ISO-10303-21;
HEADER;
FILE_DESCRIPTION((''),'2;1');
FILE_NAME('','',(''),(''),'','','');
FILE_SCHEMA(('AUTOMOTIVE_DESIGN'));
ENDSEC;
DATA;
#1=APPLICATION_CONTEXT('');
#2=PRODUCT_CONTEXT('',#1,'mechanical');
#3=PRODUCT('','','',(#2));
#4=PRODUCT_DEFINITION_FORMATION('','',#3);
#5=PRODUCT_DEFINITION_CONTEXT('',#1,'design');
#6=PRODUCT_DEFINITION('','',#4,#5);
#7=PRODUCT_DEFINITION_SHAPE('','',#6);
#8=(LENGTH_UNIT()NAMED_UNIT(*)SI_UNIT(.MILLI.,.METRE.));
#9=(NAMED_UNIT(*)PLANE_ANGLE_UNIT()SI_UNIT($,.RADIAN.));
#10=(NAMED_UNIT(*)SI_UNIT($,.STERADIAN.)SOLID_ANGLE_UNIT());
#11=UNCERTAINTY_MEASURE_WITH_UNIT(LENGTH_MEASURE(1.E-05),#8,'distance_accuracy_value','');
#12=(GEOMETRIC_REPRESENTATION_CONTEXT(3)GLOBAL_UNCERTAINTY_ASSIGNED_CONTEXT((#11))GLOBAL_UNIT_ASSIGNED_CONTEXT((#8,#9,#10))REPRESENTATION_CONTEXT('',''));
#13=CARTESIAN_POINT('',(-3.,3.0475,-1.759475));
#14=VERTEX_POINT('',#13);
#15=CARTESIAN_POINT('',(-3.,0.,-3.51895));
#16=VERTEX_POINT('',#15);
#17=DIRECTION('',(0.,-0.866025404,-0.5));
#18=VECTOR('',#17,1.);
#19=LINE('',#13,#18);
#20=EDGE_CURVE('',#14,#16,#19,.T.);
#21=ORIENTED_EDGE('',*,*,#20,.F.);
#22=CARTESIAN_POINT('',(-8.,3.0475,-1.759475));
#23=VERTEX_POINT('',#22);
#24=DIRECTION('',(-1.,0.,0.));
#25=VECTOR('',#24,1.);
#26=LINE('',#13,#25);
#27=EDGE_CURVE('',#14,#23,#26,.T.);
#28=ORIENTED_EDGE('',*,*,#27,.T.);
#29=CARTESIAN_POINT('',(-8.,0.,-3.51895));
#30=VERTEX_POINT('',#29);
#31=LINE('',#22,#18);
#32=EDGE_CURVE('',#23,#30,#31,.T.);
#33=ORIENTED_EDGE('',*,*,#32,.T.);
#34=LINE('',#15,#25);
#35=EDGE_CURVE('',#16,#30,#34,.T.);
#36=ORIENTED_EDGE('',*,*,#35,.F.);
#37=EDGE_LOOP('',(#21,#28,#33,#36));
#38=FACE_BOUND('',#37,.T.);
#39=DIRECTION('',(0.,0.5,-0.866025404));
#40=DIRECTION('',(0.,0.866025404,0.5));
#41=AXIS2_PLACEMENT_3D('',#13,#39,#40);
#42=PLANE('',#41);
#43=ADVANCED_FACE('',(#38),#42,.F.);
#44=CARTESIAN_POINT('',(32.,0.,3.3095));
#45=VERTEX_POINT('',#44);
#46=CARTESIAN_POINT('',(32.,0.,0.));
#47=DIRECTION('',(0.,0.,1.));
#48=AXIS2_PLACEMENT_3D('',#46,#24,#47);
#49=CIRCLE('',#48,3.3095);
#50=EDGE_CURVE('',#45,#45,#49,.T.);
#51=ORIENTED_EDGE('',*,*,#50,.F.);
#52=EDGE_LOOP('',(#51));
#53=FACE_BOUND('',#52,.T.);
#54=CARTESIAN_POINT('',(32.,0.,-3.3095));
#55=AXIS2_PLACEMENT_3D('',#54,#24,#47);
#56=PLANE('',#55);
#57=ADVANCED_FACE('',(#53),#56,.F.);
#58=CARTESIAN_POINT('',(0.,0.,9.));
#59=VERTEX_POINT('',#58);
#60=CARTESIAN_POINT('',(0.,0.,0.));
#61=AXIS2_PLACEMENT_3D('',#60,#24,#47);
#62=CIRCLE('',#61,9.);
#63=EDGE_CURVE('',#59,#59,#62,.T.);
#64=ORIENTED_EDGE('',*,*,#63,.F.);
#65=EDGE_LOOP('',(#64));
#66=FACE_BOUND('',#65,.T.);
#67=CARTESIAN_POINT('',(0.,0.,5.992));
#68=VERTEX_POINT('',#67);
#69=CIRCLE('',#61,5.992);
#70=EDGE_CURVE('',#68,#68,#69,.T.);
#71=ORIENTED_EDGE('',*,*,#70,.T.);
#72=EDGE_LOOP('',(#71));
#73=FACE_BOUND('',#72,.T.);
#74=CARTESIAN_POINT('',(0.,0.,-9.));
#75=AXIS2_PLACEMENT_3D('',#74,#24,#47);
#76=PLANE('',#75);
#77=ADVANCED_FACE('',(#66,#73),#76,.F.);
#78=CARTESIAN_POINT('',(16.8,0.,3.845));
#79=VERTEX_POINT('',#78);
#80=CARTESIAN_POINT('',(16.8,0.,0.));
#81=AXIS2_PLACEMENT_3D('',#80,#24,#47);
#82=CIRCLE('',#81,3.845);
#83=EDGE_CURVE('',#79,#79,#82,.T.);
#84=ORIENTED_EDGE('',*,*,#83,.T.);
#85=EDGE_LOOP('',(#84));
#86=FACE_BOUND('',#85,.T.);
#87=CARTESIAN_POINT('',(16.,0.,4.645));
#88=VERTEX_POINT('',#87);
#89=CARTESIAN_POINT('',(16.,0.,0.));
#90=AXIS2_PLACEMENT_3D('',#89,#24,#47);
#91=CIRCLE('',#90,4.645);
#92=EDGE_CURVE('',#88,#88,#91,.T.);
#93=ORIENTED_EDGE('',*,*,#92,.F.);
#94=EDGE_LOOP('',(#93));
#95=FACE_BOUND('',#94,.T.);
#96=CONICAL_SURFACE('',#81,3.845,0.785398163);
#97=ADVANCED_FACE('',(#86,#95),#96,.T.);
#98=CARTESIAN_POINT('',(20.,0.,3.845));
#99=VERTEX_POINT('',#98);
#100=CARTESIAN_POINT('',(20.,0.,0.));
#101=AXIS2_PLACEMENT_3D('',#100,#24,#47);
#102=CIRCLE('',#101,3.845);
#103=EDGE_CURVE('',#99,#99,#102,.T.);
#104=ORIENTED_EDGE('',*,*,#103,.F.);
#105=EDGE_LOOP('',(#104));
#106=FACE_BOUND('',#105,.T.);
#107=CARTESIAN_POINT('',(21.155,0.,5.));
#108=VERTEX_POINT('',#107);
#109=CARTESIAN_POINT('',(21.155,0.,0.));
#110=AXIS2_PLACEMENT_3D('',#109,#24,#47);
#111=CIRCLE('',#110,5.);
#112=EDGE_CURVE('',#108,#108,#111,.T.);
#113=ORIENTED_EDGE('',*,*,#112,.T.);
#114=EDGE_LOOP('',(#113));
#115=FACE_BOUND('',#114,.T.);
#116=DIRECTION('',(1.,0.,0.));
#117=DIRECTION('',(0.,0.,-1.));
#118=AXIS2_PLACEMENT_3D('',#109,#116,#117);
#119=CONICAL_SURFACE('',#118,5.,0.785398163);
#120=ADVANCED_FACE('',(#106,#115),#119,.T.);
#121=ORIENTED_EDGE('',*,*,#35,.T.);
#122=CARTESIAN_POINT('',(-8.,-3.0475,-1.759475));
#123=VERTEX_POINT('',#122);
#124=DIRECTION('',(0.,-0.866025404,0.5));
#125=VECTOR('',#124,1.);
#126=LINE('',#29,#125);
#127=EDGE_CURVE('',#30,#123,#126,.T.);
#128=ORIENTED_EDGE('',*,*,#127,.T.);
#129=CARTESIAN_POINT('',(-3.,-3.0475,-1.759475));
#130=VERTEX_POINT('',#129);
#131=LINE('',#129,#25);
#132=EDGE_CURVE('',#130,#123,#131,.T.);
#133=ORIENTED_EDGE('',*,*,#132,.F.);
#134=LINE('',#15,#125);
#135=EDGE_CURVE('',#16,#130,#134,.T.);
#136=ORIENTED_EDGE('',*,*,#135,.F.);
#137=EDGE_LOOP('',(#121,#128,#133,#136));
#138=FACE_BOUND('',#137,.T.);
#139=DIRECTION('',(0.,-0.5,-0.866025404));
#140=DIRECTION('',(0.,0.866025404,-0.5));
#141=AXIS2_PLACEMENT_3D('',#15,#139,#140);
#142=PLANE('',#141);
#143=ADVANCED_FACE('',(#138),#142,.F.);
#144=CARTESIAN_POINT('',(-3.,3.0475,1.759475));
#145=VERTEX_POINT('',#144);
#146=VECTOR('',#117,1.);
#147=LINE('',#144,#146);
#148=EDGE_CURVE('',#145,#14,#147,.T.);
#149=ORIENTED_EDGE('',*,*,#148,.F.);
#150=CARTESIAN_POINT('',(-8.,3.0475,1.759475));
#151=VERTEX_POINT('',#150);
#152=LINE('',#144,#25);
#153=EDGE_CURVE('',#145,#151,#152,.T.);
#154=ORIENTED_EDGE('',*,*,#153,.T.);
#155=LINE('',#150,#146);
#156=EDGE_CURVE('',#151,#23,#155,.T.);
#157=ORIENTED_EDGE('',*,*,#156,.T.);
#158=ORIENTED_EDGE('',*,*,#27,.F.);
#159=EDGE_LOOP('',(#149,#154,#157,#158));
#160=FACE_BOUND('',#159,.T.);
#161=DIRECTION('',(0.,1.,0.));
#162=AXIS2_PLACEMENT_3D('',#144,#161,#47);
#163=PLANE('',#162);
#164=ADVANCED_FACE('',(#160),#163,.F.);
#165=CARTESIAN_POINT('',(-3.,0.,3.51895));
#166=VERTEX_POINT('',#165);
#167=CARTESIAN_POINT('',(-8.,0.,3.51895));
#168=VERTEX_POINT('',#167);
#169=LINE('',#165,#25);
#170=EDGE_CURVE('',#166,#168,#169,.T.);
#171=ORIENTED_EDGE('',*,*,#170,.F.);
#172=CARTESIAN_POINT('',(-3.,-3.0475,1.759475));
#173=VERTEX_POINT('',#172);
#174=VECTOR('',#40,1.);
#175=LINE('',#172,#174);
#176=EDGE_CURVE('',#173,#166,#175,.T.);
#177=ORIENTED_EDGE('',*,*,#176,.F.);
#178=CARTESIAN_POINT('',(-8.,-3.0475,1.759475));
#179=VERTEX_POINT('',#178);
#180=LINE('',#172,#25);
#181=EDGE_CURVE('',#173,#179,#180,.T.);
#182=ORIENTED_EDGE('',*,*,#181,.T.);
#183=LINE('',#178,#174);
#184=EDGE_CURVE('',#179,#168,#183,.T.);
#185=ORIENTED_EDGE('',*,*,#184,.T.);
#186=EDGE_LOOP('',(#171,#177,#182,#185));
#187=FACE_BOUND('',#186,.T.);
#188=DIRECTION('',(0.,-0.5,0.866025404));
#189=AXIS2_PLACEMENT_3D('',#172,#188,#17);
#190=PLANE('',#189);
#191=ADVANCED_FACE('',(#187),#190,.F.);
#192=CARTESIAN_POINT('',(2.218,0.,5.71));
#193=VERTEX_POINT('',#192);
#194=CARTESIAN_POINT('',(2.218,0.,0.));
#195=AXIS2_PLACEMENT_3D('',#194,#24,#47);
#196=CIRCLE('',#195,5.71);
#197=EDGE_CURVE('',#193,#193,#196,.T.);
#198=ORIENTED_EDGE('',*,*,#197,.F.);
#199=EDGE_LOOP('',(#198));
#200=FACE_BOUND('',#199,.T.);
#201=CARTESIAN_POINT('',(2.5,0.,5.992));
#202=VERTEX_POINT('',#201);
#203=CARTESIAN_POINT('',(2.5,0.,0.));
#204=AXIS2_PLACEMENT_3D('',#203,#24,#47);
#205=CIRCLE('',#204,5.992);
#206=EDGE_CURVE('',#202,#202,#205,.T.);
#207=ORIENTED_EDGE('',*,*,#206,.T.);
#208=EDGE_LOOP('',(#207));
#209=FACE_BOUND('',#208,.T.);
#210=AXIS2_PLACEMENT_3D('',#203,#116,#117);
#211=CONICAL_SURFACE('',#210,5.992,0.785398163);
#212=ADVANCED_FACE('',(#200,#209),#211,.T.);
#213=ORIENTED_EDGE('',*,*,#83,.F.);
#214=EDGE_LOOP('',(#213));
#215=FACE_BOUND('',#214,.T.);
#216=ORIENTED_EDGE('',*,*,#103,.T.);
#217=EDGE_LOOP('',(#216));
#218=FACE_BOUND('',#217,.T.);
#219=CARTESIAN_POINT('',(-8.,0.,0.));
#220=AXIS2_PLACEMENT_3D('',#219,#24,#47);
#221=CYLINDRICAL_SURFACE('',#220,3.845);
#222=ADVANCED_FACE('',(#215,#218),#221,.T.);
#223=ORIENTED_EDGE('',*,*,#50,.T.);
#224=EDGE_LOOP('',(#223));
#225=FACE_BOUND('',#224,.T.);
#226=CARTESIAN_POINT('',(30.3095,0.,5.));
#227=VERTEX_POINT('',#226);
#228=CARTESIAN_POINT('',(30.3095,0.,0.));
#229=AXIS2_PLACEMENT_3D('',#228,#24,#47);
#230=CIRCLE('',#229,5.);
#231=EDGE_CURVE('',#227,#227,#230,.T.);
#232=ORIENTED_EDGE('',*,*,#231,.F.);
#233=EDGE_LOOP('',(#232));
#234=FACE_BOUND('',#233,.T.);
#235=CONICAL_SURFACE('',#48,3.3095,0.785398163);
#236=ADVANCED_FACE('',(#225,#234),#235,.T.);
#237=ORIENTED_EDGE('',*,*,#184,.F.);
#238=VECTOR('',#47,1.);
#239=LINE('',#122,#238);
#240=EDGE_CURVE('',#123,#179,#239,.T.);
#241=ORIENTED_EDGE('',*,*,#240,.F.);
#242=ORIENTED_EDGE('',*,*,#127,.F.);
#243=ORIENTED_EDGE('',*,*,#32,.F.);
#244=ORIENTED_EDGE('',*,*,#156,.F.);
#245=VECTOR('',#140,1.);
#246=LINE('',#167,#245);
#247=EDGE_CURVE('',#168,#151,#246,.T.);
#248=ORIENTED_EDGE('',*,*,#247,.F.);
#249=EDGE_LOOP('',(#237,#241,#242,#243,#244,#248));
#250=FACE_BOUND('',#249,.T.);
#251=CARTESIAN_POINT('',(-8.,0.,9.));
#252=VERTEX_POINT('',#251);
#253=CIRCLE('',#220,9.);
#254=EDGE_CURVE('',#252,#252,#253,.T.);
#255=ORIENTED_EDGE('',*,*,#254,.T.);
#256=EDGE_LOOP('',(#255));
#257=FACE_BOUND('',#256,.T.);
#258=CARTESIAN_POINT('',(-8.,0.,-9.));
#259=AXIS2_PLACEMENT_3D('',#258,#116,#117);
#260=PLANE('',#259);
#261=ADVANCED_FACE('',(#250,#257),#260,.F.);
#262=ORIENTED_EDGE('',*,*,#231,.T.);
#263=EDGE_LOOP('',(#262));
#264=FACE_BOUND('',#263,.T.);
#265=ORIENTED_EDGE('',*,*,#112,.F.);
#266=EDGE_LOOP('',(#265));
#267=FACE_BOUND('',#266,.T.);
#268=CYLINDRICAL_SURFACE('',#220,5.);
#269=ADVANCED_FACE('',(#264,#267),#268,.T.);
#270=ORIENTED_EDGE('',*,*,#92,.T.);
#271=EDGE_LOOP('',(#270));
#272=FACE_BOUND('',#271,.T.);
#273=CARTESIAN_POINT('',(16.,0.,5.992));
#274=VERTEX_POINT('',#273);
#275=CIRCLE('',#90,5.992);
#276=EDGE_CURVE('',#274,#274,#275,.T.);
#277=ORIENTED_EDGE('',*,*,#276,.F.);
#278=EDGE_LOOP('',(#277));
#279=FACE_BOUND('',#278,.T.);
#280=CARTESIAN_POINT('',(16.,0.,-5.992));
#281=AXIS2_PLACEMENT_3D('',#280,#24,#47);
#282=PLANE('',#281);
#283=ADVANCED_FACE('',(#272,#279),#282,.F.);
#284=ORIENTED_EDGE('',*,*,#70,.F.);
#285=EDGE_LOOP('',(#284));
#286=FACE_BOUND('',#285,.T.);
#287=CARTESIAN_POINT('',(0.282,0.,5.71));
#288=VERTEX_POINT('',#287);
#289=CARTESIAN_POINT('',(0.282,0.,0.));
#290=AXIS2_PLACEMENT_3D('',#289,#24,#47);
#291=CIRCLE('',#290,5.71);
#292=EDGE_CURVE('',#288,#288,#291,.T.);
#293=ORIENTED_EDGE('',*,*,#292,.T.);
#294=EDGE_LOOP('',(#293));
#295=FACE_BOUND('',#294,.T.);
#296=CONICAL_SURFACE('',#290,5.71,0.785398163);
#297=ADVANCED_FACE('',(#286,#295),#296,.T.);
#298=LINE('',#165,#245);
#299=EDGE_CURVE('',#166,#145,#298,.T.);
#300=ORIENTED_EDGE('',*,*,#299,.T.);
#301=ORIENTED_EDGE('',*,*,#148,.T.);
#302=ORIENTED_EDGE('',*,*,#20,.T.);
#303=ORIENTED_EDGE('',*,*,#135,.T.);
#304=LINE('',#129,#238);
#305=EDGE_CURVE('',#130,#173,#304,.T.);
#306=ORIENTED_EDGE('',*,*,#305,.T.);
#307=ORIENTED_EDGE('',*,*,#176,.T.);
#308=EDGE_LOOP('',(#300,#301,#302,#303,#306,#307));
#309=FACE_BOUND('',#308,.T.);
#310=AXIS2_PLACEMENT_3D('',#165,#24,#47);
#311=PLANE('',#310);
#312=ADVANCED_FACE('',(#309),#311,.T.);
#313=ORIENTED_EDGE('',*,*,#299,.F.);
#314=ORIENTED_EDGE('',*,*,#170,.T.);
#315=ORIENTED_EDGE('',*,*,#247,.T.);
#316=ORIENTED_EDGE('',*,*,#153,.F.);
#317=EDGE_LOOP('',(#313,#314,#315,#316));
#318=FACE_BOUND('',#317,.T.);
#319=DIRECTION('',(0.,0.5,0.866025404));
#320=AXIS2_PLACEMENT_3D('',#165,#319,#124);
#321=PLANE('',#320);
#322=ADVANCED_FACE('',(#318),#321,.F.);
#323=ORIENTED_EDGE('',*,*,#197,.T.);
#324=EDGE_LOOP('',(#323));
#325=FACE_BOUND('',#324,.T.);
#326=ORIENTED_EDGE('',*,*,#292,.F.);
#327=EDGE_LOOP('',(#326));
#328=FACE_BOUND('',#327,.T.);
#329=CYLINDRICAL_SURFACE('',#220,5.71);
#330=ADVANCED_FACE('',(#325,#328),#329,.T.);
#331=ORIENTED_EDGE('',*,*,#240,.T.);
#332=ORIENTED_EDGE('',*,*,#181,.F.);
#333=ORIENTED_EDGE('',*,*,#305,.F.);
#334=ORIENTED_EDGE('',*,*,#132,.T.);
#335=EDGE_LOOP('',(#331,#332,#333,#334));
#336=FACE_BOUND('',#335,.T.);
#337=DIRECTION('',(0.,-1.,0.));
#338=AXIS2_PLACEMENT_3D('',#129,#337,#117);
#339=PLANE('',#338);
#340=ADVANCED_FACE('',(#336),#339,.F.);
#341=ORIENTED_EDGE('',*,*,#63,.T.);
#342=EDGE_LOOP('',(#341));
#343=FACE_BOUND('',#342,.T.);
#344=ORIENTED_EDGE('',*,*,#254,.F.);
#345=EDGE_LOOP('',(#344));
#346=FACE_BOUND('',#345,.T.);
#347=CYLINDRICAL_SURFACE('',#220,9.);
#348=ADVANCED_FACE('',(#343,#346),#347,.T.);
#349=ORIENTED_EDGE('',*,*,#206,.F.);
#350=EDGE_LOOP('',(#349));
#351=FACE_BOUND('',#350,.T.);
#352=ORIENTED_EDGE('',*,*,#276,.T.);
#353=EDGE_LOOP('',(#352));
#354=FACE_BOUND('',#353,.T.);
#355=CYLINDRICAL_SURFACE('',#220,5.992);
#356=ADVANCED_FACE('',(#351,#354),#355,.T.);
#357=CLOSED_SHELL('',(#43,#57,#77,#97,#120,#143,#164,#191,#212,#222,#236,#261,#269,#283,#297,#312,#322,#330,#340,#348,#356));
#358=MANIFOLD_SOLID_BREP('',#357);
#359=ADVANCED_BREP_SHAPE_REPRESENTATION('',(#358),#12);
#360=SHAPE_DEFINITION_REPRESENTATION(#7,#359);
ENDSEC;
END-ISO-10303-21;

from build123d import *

# Parameters (mm, degrees)
PROPERTYMANAGER_START         = -3
PROPERTYMANAGER_OUTLINE_R     = 5.71
PROPERTYMANAGER_DEPTH         = 19
PROPERTYMANAGER_START_2       = -8
PROPERTYMANAGER_2_OUTLINE_R   = 9
PROPERTYMANAGER_2_DEPTH       = 8
PROPERTYMANAGER_START_3       = 21.1549999
PROPERTYMANAGER_3_OUTLINE_R   = 5
PROPERTYMANAGER_3_DEPTH       = 9.1545
PROPERTYMANAGER_START_4       = 16
PROPERTYMANAGER_4_OUTLINE_R   = 3.845
PROPERTYMANAGER_4_DEPTH       = 14.3094999
PROPERTYMANAGER_START_5       = 2.4999999
PROPERTYMANAGER_5_OUTLINE_R   = 5.992
PROPERTYMANAGER_5_OUTLINE_R_2 = 5.71
PROPERTYMANAGER_5_DEPTH       = 13.5000001
HEXDRIVE_DEPTH                = 5


with BuildPart() as part:
    # PropertyManager: read off the stored shape, not the designer's step
    # PropertyManager outline → PropertyManager (new body)
    with BuildSketch(Plane.YZ.offset(PROPERTYMANAGER_START)):
        Circle(PROPERTYMANAGER_OUTLINE_R)
    extrude(amount=PROPERTYMANAGER_DEPTH)

    # PropertyManager 2 outline → PropertyManager 2 (add)
    with BuildSketch(Plane.YZ.offset(PROPERTYMANAGER_START_2)):
        Circle(PROPERTYMANAGER_2_OUTLINE_R)
        Polygon((0, 3.518949891), (3.0475, 1.759474945), (3.0475, -1.759474945), (0, -3.518949891), (-3.0475, -1.759474945), (-3.0475, 1.759474945), align=None, mode=Mode.SUBTRACT)
    extrude(amount=PROPERTYMANAGER_2_DEPTH)



with BuildPart() as body_2:
    # PropertyManager 3 outline → PropertyManager 3 (new body)
    with BuildSketch(Plane.YZ.offset(PROPERTYMANAGER_START_3)):
        Circle(PROPERTYMANAGER_3_OUTLINE_R)
    extrude(amount=PROPERTYMANAGER_3_DEPTH)


with BuildPart() as part_1:
    add(part.part)

    add(body_2.part)  # PropertyManager 4 merges body 2
    # PropertyManager 4 outline → PropertyManager 4 (add)
    with BuildSketch(Plane.YZ.offset(PROPERTYMANAGER_START_4)):
        Circle(PROPERTYMANAGER_4_OUTLINE_R)
    extrude(amount=PROPERTYMANAGER_4_DEPTH)

    # PropertyManager 5 outline → PropertyManager 5 (add)
    with BuildSketch(Plane.YZ.offset(PROPERTYMANAGER_START_5)):
        Circle(PROPERTYMANAGER_5_OUTLINE_R)
        Circle(PROPERTYMANAGER_5_OUTLINE_R_2, mode=Mode.SUBTRACT)
    extrude(amount=PROPERTYMANAGER_5_DEPTH)

    # PropertyManager 6 outline → PropertyManager 6 (revolve)
    with BuildSketch(Plane.YX):
        Polygon((3.3095, 32), (0, 32), (0, 30.3094999), (5, 30.30949995), align=None)
        Polygon((3.845, 21.1549999), (3.845, 20), (5, 21.15499995), align=None)
        Polygon((4.645, 16), (3.845, 16.8), (3.845, 16), align=None)
        Polygon((5.992, 2.4999999), (5.71, 2.4999999), (5.71, 2.218), align=None)
        Polygon((5.992, 0), (5.71, 0.282), (5.71, 0), align=None)
    revolve(axis=Axis((0, 0, 0), (1, 0, 0)))

    # BodySketch → BaseBody (revolve)
    with BuildSketch(Plane(origin=(0, 0, 0), x_dir=(1, 0, 0), z_dir=(0, 1, 0)), mode=Mode.PRIVATE) as basebody_sk:
        Polygon((0, 9), (-8, 9), (-8, 0), (32, 0), (32, 3.3095), (30.3095, 5), (21.155, 5), (20, 3.845), (16.8, 3.845), (16, 4.645), (16, 5.992), (2.5, 5.992), (2.218, 5.71), (0.282, 5.71), (0, 5.992), align=None)
    revolve(basebody_sk.sketch.rotate(Axis((-8, 0, 0), (1, 0, 0)), 180), axis=Axis((-8, 0, 0), (1, 0, 0)))

    # DriveSketch → HexDrive (cut)
    with BuildSketch(Plane.ZY.offset(8)):
        Polygon((3.518949891, 0), (1.759474945, 3.0475), (-1.759474945, 3.0475), (-3.518949891, 0), (-1.759474945, -3.0475), (1.759474945, -3.0475), align=None)
    extrude(amount=-HEXDRIVE_DEPTH, mode=Mode.SUBTRACT)


solid = part_1.part
